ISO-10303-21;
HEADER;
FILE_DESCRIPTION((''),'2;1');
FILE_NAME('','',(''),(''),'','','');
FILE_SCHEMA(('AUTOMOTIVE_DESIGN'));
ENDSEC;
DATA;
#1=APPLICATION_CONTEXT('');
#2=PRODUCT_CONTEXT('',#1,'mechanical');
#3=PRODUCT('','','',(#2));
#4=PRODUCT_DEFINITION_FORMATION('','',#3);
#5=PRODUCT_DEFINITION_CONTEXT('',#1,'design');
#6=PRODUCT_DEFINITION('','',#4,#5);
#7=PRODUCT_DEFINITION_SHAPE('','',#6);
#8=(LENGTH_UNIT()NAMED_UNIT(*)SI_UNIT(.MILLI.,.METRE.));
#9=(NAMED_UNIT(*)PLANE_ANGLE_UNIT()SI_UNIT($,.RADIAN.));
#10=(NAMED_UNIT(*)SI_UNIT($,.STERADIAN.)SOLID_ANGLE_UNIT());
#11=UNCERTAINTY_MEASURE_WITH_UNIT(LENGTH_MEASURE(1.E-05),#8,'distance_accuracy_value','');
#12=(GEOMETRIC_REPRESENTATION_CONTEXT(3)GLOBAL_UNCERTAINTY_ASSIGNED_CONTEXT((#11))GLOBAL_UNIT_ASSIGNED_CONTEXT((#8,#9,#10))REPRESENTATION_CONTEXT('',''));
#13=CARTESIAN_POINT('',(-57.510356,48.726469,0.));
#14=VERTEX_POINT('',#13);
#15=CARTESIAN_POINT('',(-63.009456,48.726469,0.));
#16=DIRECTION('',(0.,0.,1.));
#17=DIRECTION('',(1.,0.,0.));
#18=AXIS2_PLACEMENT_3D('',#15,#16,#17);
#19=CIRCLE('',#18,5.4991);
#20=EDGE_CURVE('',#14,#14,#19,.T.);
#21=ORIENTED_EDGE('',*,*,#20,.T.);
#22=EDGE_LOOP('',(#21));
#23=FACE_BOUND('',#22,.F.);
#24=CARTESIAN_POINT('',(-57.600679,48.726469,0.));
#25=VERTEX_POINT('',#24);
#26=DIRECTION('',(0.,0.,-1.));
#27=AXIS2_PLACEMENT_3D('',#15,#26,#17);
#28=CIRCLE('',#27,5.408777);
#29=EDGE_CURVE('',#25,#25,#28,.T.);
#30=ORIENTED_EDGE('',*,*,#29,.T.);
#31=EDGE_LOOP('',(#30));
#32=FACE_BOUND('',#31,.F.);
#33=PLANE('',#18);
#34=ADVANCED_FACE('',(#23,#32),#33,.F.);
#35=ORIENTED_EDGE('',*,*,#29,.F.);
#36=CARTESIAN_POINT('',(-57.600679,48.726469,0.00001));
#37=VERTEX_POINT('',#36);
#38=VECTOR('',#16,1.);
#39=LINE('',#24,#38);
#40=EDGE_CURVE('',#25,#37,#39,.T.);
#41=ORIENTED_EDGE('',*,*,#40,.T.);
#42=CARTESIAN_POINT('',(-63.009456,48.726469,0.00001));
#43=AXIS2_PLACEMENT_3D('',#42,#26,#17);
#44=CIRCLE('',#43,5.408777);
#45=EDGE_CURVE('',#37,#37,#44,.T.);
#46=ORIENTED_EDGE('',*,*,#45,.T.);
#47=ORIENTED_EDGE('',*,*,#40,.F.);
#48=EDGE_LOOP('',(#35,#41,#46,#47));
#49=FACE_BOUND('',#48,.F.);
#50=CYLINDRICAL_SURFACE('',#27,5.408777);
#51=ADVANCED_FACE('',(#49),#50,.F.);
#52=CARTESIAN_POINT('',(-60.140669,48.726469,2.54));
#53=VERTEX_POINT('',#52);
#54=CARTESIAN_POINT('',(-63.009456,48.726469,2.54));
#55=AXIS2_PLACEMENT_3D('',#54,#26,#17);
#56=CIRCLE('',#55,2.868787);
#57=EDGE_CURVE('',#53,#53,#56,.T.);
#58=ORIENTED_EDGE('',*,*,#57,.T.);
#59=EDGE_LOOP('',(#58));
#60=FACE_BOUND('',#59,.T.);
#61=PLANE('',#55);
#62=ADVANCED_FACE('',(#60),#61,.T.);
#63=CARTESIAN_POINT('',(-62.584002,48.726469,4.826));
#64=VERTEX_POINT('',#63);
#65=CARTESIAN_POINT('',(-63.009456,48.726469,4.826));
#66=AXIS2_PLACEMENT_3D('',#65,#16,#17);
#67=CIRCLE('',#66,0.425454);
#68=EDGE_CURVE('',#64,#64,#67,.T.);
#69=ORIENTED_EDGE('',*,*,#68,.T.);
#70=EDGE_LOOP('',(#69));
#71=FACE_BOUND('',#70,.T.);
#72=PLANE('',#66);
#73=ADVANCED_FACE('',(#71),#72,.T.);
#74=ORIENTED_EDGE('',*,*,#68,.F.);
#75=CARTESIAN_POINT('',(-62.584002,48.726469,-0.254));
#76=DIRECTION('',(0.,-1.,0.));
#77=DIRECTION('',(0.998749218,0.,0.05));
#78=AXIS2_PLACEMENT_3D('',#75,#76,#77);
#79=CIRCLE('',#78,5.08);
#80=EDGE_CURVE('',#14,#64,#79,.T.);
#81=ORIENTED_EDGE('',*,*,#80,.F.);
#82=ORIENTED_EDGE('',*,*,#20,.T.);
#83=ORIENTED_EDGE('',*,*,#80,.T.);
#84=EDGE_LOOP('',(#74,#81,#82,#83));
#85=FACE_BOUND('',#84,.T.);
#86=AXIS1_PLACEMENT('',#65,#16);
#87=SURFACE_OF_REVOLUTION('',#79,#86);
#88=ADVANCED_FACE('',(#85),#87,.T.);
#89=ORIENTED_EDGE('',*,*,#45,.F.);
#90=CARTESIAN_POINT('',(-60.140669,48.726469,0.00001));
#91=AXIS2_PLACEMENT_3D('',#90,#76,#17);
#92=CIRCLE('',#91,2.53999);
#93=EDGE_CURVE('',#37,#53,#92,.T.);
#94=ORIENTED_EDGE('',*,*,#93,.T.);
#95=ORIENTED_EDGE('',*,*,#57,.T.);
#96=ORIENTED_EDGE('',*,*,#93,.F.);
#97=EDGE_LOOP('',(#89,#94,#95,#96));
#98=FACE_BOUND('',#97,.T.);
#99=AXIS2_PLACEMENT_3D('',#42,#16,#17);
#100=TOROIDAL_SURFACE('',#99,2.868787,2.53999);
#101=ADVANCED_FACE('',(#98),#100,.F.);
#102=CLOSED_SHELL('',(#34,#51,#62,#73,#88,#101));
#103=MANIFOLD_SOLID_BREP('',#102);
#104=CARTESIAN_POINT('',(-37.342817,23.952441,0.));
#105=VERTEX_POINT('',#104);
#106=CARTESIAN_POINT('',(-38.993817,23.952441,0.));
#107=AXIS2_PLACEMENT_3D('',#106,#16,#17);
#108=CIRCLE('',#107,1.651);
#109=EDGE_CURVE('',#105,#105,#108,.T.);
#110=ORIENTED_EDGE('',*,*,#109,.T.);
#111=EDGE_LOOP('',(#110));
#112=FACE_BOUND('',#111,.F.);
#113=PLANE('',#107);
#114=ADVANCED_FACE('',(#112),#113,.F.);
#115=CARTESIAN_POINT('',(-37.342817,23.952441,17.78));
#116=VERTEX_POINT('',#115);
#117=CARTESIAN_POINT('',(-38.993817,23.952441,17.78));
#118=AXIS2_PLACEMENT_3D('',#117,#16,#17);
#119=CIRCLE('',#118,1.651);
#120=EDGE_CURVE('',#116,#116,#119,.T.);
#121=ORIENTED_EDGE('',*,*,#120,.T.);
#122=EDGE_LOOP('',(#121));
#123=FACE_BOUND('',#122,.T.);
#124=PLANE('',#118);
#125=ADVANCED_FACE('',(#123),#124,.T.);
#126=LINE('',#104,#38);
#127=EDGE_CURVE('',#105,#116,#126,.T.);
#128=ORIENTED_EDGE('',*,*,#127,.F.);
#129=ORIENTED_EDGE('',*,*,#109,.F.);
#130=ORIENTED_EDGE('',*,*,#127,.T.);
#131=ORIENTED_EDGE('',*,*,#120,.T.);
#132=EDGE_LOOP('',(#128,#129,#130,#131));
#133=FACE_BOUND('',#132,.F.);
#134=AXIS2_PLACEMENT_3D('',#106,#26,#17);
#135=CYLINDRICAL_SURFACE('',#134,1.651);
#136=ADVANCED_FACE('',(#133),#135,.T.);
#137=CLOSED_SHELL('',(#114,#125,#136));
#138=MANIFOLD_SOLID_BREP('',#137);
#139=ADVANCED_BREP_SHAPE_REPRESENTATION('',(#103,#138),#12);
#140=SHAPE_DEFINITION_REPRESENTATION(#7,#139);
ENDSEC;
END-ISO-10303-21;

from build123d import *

# Parameters (mm, degrees)
F0_R     = 1.651
F1_DEPTH = 17.78
F2_R     = 5.4991
F3_DEPTH = 4.826
F4_R     = 5.4087768166
F5_DEPTH = 2.54
F6_R     = 2.53999


# Not quite as in the source:
# - a fillet or chamfer that OpenCascade refuses, or shapes differently, is made with other operations: its cross-section is extruded or revolved along the edge and cut away or added
# - a fillet or chamfer is up to 0.001 mm smaller than in the source, because OpenCascade refuses the exact size


with BuildPart() as f1:
    # F0 (on Top) → F1 (new body)
    with BuildSketch(Plane.XY):
        with Locations((-38.9938168228, 23.95244129)):
            Circle(F0_R)
    extrude(amount=F1_DEPTH)


with BuildPart() as f3:
    # F2 (on Top) → F3 (new body)
    with BuildSketch(Plane.XY):
        with Locations((-63.0094558001, 48.7264692783)):
            Circle(F2_R)
    extrude(amount=F3_DEPTH)

    # F4 (on face) → F5 (cut)
    with BuildSketch(Plane(origin=(0, 0, 0), x_dir=(1, 0, 0), z_dir=(0, 0, -1))):
        with Locations((-63.0094558001, -48.7264692783)):
            Circle(F4_R)
    extrude(amount=-F5_DEPTH, mode=Mode.SUBTRACT)

    # F6 (radius 2.54 in the source; OpenCascade refuses exactly that, so slightly less here)
    f6_edges = [f3.edges().sort_by_distance(p)[0] for p in [
        (-68.418233, 48.726469, 2.54),
    ]]
    fillet(f6_edges, radius=F6_R)

    # F7: fillet of radius 5.08 on 1 edges, made by hand

    # F7_s1 → F7_t2 (revolve, cut)
    with BuildSketch(Plane.XZ.offset(-48.7264692783)):
        with BuildLine():
            ThreePointArc((-57.5103558001, 0), (-59.0828534433, 3.4268096935), (-62.5840018263, 4.826))
            Line((-62.5840018263, 4.826), (-57.5103558001, 4.826))
            Line((-57.5103558001, 4.826), (-57.5103558001, 0))
        make_face()
    revolve(axis=Axis((-63.0094558001, 48.7264692783, 4.826), (0, 0, 1)), mode=Mode.SUBTRACT)


solid = Compound([f1.part, f3.part])
